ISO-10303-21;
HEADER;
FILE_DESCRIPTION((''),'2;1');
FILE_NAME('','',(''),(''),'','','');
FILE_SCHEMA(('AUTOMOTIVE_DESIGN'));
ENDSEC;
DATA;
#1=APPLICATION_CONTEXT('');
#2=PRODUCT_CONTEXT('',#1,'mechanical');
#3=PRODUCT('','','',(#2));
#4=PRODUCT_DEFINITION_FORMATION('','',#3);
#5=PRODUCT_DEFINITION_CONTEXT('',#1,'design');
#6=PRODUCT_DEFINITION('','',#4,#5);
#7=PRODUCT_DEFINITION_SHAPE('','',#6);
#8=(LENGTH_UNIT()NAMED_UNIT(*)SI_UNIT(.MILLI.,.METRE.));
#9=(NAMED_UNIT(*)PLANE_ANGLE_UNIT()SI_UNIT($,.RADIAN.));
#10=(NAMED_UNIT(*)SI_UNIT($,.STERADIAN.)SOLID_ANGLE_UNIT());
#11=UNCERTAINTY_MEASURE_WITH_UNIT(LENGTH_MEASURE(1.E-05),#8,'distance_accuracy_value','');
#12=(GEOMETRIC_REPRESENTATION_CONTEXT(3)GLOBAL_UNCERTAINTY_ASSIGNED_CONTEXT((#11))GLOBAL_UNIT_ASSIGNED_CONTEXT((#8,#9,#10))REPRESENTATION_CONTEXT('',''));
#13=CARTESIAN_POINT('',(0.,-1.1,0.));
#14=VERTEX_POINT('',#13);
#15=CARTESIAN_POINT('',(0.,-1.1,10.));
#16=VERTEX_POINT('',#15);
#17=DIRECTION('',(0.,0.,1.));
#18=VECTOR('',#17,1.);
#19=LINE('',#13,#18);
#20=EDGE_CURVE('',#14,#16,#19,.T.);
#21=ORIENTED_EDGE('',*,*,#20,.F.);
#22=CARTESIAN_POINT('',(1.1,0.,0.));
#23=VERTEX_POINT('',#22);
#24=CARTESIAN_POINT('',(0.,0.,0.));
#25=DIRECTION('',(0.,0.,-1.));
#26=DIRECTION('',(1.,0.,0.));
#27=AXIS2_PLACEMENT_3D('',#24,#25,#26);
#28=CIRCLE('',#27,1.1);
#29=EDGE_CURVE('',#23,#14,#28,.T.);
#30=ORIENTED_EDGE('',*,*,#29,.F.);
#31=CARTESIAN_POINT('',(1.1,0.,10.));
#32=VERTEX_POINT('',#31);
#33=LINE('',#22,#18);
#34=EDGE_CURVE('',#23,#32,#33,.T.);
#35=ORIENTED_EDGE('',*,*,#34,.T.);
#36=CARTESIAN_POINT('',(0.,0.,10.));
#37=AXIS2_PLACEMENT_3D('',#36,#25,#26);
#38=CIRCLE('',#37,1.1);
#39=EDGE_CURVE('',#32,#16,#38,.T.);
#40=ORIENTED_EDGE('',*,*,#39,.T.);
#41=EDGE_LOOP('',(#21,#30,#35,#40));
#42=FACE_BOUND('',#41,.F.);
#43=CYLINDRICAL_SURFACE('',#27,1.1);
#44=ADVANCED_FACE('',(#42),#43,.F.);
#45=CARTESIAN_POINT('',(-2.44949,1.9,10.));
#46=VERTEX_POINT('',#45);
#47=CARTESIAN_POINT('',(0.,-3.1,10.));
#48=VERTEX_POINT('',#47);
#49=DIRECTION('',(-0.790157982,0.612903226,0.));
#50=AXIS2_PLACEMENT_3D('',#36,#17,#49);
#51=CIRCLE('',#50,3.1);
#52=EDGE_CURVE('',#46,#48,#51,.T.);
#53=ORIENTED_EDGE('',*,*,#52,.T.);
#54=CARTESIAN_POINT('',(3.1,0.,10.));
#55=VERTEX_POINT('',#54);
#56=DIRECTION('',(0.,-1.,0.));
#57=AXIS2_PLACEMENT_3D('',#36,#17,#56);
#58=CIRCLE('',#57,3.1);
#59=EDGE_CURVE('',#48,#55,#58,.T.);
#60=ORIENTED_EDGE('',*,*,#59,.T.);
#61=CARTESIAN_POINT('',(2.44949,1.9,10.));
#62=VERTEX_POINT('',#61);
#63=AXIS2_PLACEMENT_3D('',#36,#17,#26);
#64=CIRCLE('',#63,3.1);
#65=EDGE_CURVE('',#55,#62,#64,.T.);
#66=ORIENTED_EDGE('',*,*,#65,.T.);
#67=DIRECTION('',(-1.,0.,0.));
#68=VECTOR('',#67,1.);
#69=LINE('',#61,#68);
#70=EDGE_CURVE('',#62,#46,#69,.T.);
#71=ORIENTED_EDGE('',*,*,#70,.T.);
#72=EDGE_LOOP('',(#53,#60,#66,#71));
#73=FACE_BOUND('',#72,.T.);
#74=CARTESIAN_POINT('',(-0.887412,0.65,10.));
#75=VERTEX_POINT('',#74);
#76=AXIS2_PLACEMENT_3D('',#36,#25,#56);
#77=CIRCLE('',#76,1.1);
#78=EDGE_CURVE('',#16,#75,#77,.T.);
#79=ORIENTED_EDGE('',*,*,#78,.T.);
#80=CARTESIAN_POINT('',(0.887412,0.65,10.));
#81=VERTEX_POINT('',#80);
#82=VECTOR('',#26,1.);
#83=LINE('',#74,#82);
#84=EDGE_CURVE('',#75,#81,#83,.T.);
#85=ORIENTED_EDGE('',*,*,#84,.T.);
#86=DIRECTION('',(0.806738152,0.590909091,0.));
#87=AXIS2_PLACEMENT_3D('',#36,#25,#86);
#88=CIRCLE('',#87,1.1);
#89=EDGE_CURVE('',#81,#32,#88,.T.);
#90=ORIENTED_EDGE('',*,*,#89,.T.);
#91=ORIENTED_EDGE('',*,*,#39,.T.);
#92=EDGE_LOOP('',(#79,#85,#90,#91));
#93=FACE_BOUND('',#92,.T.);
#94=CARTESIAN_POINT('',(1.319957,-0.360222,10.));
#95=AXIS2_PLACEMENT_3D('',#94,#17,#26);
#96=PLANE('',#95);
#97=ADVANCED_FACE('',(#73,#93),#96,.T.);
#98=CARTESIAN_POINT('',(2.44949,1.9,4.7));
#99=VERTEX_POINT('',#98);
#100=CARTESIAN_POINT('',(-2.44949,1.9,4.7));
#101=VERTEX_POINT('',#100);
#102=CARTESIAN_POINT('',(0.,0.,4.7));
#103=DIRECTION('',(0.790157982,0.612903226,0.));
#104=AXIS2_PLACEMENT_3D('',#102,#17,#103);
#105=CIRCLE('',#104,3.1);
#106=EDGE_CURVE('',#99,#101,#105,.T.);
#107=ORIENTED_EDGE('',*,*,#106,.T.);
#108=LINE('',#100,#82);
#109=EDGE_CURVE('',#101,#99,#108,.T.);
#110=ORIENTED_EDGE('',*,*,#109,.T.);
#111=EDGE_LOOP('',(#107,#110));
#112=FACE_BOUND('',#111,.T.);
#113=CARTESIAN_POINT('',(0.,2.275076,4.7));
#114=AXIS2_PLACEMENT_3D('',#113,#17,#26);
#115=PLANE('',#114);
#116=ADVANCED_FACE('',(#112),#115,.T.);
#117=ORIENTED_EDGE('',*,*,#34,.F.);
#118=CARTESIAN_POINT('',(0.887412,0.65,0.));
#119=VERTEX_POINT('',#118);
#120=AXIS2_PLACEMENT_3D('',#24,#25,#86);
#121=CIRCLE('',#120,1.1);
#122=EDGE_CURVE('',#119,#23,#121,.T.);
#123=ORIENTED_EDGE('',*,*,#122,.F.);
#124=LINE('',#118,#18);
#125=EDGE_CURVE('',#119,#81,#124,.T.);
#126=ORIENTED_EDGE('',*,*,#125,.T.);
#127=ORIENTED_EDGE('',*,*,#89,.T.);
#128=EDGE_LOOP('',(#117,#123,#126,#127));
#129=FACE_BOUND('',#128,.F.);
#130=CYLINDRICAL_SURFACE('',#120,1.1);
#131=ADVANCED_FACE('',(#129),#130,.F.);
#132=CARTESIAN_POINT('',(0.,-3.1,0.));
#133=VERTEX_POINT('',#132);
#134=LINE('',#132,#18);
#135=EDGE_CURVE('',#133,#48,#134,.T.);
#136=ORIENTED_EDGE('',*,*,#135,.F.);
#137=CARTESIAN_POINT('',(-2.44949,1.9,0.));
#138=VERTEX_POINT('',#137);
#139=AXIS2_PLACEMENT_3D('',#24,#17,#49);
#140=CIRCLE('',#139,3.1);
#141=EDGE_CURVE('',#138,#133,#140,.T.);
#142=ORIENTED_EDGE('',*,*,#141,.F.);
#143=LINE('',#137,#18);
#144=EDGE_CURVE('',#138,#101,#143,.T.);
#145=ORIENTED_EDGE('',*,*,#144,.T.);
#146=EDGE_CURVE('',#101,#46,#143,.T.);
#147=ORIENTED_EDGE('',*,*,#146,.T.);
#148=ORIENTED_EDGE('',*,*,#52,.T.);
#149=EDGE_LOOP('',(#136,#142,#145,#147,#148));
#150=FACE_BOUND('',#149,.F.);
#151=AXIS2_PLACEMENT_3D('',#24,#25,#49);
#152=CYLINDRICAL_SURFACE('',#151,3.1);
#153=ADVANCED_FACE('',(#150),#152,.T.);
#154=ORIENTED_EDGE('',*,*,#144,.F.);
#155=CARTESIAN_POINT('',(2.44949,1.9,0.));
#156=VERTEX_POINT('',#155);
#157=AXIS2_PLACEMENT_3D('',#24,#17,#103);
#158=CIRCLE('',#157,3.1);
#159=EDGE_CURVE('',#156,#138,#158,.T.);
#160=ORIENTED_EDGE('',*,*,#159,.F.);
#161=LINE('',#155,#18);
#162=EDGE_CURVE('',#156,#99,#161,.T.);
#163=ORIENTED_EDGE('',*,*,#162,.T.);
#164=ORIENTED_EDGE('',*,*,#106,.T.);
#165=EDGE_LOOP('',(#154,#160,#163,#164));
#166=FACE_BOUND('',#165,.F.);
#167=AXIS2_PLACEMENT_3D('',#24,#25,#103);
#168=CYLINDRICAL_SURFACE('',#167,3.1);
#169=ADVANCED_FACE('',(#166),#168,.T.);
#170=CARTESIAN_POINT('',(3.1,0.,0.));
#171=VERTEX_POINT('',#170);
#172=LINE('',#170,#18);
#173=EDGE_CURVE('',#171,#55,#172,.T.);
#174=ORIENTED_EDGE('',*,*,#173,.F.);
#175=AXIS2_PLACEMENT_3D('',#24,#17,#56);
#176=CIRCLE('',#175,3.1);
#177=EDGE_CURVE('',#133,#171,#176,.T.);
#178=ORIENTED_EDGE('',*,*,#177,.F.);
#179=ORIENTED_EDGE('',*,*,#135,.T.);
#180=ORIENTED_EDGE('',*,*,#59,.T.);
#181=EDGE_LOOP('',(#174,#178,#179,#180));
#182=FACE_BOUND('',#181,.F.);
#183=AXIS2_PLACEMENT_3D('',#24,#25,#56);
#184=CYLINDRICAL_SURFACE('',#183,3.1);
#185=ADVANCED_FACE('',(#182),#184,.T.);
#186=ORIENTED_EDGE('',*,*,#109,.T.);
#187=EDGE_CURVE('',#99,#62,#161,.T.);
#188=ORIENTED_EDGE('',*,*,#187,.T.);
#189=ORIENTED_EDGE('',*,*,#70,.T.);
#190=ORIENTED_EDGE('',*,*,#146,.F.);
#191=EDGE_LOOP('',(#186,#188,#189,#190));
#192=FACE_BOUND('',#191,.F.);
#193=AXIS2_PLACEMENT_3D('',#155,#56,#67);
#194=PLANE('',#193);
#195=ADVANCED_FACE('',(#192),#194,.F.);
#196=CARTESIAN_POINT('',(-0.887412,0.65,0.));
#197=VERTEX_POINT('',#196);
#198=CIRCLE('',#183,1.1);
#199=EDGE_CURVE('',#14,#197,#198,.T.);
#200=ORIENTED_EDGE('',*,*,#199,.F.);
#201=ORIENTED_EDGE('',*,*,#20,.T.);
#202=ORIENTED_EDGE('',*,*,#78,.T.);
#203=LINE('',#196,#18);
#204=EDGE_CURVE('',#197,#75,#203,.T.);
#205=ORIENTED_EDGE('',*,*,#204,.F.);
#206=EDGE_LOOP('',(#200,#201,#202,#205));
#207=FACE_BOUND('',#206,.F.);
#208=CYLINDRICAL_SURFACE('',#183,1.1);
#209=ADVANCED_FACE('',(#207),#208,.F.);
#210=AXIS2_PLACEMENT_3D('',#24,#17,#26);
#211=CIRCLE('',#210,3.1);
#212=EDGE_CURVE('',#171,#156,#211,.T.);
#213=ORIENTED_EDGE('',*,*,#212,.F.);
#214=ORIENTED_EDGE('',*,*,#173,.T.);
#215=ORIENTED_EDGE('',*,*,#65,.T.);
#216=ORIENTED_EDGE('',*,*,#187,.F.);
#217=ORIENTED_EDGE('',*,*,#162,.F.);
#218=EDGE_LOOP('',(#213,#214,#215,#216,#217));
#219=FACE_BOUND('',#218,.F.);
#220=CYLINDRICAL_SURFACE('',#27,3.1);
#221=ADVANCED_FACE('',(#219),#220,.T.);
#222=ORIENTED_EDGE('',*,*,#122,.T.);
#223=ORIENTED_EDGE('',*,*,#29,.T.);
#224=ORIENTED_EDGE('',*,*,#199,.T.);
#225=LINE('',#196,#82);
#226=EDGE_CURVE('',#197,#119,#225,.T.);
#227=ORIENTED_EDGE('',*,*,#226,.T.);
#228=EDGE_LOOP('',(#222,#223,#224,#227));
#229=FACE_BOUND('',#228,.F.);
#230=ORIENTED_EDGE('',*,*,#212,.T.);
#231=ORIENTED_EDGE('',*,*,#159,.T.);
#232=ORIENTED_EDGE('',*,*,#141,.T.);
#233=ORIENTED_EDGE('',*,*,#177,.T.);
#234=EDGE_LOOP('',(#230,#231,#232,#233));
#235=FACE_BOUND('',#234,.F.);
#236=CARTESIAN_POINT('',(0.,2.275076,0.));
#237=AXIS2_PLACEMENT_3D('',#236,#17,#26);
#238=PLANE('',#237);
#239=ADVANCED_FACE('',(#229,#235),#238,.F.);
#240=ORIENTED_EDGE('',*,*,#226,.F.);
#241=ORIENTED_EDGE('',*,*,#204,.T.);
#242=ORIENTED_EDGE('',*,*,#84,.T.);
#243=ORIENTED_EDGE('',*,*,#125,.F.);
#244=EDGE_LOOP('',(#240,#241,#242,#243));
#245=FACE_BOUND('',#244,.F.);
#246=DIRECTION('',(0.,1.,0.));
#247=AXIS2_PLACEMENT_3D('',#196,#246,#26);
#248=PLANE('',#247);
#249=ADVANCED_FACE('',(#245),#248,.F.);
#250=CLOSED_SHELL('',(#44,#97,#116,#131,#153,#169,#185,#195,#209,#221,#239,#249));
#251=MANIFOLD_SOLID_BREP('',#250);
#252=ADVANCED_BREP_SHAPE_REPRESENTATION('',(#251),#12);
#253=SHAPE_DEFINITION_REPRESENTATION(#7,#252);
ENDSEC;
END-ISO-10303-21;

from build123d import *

# Parameters (mm, degrees)
F1_DEPTH = 10
F2_DEPTH = 4.7


with BuildPart() as f1:
    # F0 (on Top) → F1 (new body)
    with BuildSketch(Plane.XY):
        with BuildLine():
            ThreePointArc((0, -3.1), (2.1920310217, -2.1920310217), (3.1, 0))
            ThreePointArc((3.1, 0), (2.9328670446, 1.0041368924), (2.4494897428, 1.9))
            Line((2.4494897428, 1.9), (0, 1.9))
            Line((0, 1.9), (0, 1.1))
            ThreePointArc((0, 1.1), (0.4974937186, 0.9810708435), (0.8874119675, 0.65))
            ThreePointArc((0.8874119675, 0.65), (1.0455030283, 0.3419406643), (1.1, 0))
            ThreePointArc((1.1, 0), (0.7778174593, -0.7778174593), (0, -1.1))
            Line((0, -1.1), (0, -3.1))
        make_face()
        with BuildLine():
            ThreePointArc((-2.4494897428, 1.9), (-2.7838821814, -1.3638181697), (0, -3.1))
            Line((0, -3.1), (0, -1.1))
            ThreePointArc((0, -1.1), (-0.9810708435, -0.4974937186), (-0.8874119675, 0.65))
            ThreePointArc((-0.8874119675, 0.65), (-0.4974937186, 0.9810708435), (0, 1.1))
            Line((0, 1.1), (0, 1.9))
            Line((0, 1.9), (-2.4494897428, 1.9))
        make_face()
        with BuildLine():
            ThreePointArc((0.8874119675, 0.65), (0.4974937186, 0.9810708435), (0, 1.1))
            Line((0, 1.1), (0, 0.65))
            Line((0, 0.65), (0.8874119675, 0.65))
        make_face()
        with BuildLine():
            Line((0, 0.65), (0, 1.1))
            ThreePointArc((0, 1.1), (-0.4974937186, 0.9810708435), (-0.8874119675, 0.65))
            Line((-0.8874119675, 0.65), (0, 0.65))
        make_face()
    extrude(amount=F1_DEPTH)

    # F0 (on Top) → F2 (join)
    with BuildSketch(Plane.XY):
        with BuildLine():
            Line((0, 1.9), (2.4494897428, 1.9))
            ThreePointArc((2.4494897428, 1.9), (0, 3.1), (-2.4494897428, 1.9))
            Line((-2.4494897428, 1.9), (0, 1.9))
        make_face()
    extrude(amount=F2_DEPTH)


solid = f1.part
